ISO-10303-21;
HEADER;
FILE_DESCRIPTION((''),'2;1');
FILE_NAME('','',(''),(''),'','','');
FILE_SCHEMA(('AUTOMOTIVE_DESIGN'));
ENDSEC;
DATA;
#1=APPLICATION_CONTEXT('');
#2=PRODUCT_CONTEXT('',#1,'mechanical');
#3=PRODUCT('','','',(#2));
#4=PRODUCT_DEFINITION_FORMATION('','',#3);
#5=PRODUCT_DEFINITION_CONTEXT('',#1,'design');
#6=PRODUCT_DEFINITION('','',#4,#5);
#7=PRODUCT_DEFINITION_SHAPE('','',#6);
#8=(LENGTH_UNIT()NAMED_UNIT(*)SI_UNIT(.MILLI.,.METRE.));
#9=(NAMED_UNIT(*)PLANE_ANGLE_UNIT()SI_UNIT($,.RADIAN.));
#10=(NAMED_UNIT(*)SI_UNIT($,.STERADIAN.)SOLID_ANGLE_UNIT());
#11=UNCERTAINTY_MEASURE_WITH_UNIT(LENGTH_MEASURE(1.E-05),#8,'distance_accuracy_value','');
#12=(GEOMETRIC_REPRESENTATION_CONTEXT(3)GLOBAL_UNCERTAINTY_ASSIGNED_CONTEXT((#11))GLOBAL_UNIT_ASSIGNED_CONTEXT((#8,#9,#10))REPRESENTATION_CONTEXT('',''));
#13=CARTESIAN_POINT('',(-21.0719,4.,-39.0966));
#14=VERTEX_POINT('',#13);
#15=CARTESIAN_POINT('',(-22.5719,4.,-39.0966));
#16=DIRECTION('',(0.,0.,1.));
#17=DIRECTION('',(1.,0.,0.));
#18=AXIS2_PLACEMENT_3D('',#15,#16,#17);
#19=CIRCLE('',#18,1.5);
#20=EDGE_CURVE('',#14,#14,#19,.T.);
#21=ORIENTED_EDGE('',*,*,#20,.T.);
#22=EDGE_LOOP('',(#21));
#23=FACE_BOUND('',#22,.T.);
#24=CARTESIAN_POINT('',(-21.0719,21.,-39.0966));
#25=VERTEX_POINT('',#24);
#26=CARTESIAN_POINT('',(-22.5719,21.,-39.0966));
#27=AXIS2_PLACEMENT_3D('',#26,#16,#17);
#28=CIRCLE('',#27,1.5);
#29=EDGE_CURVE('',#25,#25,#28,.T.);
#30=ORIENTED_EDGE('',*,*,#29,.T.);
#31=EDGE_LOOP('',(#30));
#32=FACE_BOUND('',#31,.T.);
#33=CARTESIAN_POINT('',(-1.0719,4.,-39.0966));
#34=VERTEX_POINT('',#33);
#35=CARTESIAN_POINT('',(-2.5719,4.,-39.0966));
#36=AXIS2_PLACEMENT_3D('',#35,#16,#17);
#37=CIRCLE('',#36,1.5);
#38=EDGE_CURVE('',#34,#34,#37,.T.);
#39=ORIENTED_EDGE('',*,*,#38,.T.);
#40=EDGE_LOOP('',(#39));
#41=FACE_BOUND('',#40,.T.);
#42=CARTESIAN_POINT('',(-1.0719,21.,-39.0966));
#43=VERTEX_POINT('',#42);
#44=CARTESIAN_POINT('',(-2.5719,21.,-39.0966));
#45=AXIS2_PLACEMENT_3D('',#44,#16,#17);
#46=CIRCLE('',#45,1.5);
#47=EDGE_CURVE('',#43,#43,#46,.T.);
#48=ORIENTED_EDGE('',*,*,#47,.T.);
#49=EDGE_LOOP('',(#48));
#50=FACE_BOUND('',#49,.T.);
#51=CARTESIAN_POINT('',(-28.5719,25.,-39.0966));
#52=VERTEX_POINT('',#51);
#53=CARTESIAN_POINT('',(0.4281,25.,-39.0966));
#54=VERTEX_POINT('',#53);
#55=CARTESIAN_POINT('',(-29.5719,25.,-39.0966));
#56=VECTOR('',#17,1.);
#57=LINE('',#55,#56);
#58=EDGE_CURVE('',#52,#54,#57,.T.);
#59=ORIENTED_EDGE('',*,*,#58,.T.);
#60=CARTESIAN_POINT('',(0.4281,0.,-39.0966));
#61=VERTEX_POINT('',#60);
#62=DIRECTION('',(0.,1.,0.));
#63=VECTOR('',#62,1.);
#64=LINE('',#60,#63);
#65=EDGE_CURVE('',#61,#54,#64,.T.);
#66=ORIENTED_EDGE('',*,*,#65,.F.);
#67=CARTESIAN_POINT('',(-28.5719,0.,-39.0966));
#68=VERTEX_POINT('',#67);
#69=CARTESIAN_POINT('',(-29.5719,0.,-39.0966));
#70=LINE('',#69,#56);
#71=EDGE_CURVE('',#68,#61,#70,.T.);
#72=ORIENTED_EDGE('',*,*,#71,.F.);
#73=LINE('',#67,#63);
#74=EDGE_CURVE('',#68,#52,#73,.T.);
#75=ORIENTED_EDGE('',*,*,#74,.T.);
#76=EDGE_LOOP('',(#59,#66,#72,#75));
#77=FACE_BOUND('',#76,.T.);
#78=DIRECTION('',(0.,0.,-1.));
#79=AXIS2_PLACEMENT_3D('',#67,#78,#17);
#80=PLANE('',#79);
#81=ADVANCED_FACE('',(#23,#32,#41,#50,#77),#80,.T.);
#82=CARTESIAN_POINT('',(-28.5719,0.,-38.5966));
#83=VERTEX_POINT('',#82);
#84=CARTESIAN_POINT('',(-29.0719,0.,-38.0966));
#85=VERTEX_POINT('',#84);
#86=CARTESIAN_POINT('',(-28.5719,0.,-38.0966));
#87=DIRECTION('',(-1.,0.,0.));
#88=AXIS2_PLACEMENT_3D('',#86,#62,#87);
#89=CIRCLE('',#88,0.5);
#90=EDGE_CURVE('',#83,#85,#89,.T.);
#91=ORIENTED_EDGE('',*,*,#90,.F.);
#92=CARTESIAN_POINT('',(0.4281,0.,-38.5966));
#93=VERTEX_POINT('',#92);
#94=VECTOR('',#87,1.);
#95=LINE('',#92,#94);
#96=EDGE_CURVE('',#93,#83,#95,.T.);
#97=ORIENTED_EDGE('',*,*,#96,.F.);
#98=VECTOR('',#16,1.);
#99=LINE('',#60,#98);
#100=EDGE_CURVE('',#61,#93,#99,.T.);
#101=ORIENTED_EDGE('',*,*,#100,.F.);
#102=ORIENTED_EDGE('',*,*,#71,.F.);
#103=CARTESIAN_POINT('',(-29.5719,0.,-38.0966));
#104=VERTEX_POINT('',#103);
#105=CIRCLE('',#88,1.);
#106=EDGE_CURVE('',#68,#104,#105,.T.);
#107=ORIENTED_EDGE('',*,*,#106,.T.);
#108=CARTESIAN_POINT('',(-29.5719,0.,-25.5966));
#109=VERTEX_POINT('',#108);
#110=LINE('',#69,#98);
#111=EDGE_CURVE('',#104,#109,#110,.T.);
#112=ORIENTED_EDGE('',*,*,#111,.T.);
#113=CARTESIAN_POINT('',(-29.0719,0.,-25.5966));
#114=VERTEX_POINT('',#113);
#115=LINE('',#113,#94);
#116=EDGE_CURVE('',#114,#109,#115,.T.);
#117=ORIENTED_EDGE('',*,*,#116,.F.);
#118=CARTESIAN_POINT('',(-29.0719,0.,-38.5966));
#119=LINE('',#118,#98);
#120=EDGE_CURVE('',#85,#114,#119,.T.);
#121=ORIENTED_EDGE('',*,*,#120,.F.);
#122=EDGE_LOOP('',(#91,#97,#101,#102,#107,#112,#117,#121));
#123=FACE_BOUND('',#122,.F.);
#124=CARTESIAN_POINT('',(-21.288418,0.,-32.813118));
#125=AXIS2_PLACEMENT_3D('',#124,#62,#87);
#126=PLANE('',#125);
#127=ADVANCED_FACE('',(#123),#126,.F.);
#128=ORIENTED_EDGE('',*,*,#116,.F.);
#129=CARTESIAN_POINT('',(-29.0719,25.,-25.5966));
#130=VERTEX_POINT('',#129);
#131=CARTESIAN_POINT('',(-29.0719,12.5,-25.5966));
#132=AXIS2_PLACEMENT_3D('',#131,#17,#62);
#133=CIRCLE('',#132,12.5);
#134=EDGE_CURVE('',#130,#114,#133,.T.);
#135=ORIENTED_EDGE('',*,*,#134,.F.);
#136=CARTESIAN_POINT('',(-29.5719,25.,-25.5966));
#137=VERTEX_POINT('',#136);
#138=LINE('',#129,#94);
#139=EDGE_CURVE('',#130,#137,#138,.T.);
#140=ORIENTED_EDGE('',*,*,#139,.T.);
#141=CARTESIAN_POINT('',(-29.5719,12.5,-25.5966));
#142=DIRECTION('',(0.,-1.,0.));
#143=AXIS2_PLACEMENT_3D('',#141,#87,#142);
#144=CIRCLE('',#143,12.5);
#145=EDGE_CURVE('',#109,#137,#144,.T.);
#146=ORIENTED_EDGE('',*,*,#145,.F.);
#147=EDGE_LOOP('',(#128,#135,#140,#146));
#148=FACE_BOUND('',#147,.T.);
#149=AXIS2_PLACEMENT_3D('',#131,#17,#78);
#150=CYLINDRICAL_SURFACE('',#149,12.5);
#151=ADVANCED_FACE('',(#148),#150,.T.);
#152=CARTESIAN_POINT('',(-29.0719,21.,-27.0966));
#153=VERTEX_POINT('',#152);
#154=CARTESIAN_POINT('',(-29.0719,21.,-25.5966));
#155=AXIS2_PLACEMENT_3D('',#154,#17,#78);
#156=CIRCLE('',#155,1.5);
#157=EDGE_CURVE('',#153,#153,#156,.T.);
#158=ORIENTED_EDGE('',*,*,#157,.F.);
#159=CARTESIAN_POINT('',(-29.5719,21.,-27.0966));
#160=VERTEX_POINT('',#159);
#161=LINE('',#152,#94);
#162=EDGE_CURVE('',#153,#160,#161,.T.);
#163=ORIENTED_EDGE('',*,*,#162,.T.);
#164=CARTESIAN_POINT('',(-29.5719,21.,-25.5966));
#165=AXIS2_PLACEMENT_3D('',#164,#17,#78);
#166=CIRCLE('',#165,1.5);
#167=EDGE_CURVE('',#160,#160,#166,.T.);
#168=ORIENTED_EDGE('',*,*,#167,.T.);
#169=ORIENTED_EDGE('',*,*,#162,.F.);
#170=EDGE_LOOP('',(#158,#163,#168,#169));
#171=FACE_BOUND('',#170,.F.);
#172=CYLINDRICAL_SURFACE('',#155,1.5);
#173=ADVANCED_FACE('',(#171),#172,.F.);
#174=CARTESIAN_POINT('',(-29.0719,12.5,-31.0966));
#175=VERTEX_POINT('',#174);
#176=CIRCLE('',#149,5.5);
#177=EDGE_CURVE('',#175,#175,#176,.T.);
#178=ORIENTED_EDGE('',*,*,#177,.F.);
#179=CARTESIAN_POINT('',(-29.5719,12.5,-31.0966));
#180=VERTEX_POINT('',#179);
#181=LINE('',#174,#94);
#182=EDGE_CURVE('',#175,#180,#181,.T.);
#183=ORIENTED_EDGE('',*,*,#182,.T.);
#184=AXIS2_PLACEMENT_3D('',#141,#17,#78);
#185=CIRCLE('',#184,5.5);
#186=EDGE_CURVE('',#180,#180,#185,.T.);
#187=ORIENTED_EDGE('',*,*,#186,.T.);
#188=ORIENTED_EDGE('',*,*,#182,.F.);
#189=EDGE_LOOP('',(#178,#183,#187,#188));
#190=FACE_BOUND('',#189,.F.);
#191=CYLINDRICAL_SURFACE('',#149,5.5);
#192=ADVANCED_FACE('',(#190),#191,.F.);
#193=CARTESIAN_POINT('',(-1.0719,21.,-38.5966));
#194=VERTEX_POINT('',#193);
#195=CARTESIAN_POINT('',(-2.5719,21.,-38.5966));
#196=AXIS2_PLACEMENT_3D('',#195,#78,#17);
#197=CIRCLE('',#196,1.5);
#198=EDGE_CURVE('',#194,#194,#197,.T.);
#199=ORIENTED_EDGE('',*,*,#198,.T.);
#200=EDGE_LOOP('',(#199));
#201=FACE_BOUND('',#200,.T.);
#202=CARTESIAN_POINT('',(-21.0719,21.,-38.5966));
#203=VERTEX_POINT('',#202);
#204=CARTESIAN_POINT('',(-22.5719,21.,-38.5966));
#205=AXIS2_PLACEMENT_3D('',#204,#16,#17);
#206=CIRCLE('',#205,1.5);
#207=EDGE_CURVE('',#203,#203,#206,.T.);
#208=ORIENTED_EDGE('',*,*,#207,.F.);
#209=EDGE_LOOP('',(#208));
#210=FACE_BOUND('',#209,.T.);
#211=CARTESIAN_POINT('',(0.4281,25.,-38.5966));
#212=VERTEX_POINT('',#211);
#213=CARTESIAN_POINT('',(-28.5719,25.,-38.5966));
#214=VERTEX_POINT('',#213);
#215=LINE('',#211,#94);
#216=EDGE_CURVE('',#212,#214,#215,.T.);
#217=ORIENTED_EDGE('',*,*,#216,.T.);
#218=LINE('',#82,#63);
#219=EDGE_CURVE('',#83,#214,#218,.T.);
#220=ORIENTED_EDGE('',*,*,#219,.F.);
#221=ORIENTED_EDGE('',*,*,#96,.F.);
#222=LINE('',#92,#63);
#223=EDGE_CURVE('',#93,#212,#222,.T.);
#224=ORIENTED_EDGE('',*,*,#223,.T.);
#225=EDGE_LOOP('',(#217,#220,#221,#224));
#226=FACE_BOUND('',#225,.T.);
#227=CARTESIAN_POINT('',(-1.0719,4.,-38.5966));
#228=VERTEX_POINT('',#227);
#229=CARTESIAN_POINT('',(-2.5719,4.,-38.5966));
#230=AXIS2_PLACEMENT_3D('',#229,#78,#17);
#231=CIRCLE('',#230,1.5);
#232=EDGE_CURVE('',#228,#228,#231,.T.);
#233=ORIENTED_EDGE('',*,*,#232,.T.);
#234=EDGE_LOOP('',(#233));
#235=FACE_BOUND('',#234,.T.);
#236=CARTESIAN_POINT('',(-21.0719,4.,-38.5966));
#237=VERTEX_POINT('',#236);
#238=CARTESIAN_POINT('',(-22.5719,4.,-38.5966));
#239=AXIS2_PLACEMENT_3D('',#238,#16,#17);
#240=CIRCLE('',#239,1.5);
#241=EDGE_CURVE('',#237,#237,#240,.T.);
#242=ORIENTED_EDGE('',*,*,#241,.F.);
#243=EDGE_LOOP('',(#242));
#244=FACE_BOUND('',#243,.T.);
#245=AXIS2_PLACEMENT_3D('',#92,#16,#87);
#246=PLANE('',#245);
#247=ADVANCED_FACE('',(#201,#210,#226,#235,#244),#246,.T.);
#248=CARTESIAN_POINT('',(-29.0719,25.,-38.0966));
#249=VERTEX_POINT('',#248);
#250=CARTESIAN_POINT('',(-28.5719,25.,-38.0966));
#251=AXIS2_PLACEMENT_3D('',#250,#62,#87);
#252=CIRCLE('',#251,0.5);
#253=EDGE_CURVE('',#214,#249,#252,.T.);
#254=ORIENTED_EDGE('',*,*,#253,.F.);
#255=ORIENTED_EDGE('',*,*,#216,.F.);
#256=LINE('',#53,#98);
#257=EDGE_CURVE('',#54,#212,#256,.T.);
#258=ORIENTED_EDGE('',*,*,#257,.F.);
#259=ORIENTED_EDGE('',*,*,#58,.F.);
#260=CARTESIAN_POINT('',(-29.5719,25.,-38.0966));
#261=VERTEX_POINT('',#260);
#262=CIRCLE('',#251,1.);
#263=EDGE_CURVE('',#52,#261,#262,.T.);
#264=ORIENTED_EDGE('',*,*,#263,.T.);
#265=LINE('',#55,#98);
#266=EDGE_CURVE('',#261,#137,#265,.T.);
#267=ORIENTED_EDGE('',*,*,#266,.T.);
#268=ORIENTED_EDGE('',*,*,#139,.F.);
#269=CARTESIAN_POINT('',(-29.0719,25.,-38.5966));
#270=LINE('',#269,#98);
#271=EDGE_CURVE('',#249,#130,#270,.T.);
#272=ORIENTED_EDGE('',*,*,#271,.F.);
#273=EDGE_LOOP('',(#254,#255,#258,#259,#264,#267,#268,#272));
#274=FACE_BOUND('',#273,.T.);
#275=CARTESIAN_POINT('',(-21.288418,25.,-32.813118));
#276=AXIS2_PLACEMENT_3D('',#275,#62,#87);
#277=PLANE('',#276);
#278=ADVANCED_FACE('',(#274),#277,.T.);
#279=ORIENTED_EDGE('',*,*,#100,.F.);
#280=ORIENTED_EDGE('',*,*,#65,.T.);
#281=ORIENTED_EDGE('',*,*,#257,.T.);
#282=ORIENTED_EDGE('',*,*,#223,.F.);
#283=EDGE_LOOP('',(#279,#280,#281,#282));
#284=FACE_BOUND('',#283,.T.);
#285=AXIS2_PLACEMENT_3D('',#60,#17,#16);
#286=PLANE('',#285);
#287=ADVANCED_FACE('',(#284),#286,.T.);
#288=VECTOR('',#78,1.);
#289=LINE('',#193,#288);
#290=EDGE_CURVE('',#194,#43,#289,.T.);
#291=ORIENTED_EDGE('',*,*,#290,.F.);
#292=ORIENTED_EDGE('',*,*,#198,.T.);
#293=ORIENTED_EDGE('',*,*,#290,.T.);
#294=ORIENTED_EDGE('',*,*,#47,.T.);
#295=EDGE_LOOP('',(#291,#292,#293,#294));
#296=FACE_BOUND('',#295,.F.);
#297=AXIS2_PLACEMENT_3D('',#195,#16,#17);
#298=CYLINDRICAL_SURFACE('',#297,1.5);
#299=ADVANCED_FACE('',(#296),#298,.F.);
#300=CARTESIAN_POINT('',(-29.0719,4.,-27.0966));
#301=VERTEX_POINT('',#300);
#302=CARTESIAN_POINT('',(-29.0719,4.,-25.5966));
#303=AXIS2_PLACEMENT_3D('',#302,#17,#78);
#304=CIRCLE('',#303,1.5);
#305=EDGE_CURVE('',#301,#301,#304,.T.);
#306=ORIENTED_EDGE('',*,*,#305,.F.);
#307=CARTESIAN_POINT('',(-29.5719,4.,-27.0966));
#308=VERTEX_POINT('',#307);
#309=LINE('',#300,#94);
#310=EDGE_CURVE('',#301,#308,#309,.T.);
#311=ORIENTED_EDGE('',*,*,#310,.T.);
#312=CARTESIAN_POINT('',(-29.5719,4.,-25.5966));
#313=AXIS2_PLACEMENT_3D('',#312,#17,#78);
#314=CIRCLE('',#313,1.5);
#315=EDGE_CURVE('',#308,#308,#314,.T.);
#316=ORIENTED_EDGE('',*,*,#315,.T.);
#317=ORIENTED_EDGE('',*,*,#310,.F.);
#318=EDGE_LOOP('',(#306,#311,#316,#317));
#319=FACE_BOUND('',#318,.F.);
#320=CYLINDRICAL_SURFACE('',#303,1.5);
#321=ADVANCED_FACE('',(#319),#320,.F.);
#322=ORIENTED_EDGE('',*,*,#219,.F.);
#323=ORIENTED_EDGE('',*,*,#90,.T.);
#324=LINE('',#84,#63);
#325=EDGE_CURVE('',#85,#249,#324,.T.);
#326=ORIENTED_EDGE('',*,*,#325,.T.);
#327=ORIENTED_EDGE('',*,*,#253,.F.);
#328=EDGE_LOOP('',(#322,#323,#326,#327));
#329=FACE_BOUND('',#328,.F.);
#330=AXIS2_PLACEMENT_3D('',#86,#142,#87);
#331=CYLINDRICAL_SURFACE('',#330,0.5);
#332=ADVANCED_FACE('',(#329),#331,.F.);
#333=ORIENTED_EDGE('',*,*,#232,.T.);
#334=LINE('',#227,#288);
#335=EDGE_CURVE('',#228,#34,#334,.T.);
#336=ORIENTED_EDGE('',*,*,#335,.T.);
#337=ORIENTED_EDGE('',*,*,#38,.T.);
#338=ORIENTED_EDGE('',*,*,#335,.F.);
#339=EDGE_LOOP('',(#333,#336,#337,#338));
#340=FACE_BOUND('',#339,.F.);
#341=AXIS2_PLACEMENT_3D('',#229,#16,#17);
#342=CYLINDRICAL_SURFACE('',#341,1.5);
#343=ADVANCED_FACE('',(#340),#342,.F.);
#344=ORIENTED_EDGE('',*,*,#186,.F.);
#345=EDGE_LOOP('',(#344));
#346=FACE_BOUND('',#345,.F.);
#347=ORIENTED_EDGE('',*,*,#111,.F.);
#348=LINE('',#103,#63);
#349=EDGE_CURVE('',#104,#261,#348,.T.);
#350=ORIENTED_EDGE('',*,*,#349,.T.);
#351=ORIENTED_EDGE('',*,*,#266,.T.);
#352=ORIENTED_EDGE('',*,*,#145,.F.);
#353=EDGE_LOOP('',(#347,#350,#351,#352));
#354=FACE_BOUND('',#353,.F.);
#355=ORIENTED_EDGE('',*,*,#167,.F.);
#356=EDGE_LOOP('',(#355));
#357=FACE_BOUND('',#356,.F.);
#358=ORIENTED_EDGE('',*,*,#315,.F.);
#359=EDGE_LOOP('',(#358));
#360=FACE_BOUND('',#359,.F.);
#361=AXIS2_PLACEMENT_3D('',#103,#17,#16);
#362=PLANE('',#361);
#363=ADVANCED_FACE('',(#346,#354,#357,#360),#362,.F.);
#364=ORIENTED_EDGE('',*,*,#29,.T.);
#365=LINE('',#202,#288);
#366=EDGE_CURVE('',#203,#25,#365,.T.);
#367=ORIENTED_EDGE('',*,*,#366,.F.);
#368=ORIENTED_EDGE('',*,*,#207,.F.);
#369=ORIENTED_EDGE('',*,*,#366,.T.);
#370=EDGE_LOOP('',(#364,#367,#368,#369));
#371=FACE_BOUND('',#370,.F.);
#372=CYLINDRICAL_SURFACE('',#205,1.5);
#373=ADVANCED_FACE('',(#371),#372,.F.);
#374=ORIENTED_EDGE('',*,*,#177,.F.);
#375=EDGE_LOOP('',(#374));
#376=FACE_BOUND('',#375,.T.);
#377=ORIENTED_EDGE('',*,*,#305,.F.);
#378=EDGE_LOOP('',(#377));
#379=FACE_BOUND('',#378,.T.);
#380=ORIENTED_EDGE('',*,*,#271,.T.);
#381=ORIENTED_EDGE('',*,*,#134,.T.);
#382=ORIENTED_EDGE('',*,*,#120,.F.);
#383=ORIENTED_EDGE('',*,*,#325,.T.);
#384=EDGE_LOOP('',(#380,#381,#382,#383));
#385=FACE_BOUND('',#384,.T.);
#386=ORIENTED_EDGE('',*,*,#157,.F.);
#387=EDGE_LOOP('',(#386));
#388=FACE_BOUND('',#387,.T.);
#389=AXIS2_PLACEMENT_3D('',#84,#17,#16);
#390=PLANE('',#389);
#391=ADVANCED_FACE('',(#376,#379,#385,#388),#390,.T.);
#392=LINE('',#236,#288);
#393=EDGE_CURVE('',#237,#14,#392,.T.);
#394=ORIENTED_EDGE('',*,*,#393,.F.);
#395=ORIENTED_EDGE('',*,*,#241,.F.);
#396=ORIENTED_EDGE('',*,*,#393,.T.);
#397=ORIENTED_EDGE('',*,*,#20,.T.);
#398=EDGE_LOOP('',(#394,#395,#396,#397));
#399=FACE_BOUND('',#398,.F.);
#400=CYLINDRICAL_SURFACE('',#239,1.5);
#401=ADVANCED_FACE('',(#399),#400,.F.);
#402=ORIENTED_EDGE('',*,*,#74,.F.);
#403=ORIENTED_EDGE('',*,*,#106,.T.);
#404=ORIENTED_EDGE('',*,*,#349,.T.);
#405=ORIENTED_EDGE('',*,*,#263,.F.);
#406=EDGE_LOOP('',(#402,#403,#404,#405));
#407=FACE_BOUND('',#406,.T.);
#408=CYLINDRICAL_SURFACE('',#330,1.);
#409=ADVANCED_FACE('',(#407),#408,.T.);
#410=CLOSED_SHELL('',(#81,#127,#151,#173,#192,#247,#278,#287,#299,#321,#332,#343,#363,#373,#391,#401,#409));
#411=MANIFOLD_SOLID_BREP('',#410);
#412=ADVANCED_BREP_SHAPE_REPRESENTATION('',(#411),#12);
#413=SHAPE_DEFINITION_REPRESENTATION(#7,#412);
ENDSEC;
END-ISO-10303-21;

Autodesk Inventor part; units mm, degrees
ref_plane "YZ Plane" through (0, 0, 0) normal (1, 0, 0) x (0, 1, 0)
ref_plane "XZ Plane" through (0, 0, 0) normal (0, 1, 0) x (-1, 0, 0)
ref_plane "XY Plane" through (0, 0, 0) normal (0, 0, 1) x (1, 0, 0)
sketch "草圖1" plane through (0, 0, 0) normal (0, 1, 0) x (-1, 0, 0)
  line L0 (29.5719, -39.0966) -> (29.5719, -13.0966)
  line L1 (29.5719, -39.0966) -> (-0.4281, -39.0966)
  point P0 (0, 0)
  dimension "d0" = 26
  dimension "d2" = 90
  dimension "d3" = 30
contour flange "輪廓線凸緣1" sketch "草圖1" thickness 0.5 bend radius 0.5 width 25 along (0, 1, 0) mid plane no both sides no wall seen from (-29.5719, 0, -26.0966) lies toward (1, 0, 0) curves L0 L1
bend "折彎1"
corner "轉角1"
sketch "草圖2" plane through (-29.0719, 0, -13.0966) normal (1, 0, 0) x (0, 0, -1)
  circle A0 centre (12.5, 12.5) radius 12.5
  line L0 (0, 25) -> (25, 25) projected
  line L1 (0, 0) -> (0, 25) projected
  line L2 (0, 0) -> (25, 0) projected
  point P0 (-13.0966, 0)
  point P1 (0, 12.5)
  point P2 (12.5, 25)
  point P3 (12.5, 0)
  dimension "d15" = 25
extrude "擠出1" cut sketch "草圖2" against normal up to surface (0.5 mm away) contours A0 L1 L0 | L2 L1 A0
sketch "草圖3" plane through (-29.0719, 0, -38.0966) normal (1, 0, 0) x (0, 0, -1)
  arc A0 (-12.5, 25) -> (-12.5, 0) centre (-12.5, 12.5) ccw projected
  circle A1 centre (-12.5, 21) radius 1.5
  circle A2 centre (-12.5, 4) radius 1.5
  point P0 (-38.0966, 0)
  dimension "d18" = 3
  dimension "d19" = 17
  dimension "d20" = 8.5
  dimension "d21" = 3
extrude "擠出2" cut sketch "草圖3" against normal up to surface (0.5 mm away)
sketch "草圖4" plane through (0.4281, 0, -38.5966) normal (0, 0, 1) x (1, 0, 0)
  circle A0 centre (-23, 21) radius 1.5
  circle A1 centre (-3, 21) radius 1.5
  circle A2 centre (-23, 4) radius 1.5
  circle A3 centre (-3, 4) radius 1.5
  line L0 (0, 0) -> (0, 25) projected
  line L1 (-3, 21) -> (-3, 4)
  line L2 (-3, 12.5) -> (-13.1347, 12.5)
  line L3 (-29, 25) -> (0, 25) projected
  point P0 (-0.4281, 0)
  dimension "d24" = 20
  dimension "d25" = 3
  dimension "d26" = 3
  dimension "d27" = 3
  dimension "d28" = 3
  dimension "d29" = 17
  dimension "d30" = 3
  dimension "d31" = 12.5
extrude "擠出3" cut sketch "草圖4" against normal up to surface (0.5 mm away)
sketch "草圖5" plane through (-29.0719, 0, -38.0966) normal (1, 0, 0) x (0, 0, -1)
  arc A0 (-12.5, 25) -> (-12.5, 0) centre (-12.5, 12.5) ccw projected
  circle A1 centre (-12.5, 12.5) radius 5.5
  point P0 (-38.0966, 0)
  dimension "d34" = 11
extrude "擠出4" cut sketch "草圖5" against normal up to surface (0.5 mm away)
equation "\"d4\" = 厚度"
equation "\"d5\" = 折彎離隙寬度"
equation "\"d6\" = 折彎離隙深度"
equation "\"d7\" = 最小剩餘"
equation "\"d8\" = 轉移半徑"
equation "\"d10\" = 折彎半徑"
equation "\"d12\" = 轉角離隙大小"
equation "\"d13\" = 間隙大小"
equation "\"d14\" = Jacobi半徑大小"
equation "\"折彎半徑\" = 厚度"
equation "\"折彎離隙寬度\" = 厚度"
equation "\"折彎離隙深度\" = 0.5 * 厚度"
equation "\"轉角離隙大小\" = 4 * 厚度"
equation "\"最小剩餘\" = 2 * 厚度"
equation "\"轉移半徑\" = 折彎半徑"
equation "\"Jacobi半徑大小\" = 折彎半徑"
equation "\"間隙大小\" = 厚度"
equation "\"厚度\" = 0.5"
properties part number "wheel_base"
